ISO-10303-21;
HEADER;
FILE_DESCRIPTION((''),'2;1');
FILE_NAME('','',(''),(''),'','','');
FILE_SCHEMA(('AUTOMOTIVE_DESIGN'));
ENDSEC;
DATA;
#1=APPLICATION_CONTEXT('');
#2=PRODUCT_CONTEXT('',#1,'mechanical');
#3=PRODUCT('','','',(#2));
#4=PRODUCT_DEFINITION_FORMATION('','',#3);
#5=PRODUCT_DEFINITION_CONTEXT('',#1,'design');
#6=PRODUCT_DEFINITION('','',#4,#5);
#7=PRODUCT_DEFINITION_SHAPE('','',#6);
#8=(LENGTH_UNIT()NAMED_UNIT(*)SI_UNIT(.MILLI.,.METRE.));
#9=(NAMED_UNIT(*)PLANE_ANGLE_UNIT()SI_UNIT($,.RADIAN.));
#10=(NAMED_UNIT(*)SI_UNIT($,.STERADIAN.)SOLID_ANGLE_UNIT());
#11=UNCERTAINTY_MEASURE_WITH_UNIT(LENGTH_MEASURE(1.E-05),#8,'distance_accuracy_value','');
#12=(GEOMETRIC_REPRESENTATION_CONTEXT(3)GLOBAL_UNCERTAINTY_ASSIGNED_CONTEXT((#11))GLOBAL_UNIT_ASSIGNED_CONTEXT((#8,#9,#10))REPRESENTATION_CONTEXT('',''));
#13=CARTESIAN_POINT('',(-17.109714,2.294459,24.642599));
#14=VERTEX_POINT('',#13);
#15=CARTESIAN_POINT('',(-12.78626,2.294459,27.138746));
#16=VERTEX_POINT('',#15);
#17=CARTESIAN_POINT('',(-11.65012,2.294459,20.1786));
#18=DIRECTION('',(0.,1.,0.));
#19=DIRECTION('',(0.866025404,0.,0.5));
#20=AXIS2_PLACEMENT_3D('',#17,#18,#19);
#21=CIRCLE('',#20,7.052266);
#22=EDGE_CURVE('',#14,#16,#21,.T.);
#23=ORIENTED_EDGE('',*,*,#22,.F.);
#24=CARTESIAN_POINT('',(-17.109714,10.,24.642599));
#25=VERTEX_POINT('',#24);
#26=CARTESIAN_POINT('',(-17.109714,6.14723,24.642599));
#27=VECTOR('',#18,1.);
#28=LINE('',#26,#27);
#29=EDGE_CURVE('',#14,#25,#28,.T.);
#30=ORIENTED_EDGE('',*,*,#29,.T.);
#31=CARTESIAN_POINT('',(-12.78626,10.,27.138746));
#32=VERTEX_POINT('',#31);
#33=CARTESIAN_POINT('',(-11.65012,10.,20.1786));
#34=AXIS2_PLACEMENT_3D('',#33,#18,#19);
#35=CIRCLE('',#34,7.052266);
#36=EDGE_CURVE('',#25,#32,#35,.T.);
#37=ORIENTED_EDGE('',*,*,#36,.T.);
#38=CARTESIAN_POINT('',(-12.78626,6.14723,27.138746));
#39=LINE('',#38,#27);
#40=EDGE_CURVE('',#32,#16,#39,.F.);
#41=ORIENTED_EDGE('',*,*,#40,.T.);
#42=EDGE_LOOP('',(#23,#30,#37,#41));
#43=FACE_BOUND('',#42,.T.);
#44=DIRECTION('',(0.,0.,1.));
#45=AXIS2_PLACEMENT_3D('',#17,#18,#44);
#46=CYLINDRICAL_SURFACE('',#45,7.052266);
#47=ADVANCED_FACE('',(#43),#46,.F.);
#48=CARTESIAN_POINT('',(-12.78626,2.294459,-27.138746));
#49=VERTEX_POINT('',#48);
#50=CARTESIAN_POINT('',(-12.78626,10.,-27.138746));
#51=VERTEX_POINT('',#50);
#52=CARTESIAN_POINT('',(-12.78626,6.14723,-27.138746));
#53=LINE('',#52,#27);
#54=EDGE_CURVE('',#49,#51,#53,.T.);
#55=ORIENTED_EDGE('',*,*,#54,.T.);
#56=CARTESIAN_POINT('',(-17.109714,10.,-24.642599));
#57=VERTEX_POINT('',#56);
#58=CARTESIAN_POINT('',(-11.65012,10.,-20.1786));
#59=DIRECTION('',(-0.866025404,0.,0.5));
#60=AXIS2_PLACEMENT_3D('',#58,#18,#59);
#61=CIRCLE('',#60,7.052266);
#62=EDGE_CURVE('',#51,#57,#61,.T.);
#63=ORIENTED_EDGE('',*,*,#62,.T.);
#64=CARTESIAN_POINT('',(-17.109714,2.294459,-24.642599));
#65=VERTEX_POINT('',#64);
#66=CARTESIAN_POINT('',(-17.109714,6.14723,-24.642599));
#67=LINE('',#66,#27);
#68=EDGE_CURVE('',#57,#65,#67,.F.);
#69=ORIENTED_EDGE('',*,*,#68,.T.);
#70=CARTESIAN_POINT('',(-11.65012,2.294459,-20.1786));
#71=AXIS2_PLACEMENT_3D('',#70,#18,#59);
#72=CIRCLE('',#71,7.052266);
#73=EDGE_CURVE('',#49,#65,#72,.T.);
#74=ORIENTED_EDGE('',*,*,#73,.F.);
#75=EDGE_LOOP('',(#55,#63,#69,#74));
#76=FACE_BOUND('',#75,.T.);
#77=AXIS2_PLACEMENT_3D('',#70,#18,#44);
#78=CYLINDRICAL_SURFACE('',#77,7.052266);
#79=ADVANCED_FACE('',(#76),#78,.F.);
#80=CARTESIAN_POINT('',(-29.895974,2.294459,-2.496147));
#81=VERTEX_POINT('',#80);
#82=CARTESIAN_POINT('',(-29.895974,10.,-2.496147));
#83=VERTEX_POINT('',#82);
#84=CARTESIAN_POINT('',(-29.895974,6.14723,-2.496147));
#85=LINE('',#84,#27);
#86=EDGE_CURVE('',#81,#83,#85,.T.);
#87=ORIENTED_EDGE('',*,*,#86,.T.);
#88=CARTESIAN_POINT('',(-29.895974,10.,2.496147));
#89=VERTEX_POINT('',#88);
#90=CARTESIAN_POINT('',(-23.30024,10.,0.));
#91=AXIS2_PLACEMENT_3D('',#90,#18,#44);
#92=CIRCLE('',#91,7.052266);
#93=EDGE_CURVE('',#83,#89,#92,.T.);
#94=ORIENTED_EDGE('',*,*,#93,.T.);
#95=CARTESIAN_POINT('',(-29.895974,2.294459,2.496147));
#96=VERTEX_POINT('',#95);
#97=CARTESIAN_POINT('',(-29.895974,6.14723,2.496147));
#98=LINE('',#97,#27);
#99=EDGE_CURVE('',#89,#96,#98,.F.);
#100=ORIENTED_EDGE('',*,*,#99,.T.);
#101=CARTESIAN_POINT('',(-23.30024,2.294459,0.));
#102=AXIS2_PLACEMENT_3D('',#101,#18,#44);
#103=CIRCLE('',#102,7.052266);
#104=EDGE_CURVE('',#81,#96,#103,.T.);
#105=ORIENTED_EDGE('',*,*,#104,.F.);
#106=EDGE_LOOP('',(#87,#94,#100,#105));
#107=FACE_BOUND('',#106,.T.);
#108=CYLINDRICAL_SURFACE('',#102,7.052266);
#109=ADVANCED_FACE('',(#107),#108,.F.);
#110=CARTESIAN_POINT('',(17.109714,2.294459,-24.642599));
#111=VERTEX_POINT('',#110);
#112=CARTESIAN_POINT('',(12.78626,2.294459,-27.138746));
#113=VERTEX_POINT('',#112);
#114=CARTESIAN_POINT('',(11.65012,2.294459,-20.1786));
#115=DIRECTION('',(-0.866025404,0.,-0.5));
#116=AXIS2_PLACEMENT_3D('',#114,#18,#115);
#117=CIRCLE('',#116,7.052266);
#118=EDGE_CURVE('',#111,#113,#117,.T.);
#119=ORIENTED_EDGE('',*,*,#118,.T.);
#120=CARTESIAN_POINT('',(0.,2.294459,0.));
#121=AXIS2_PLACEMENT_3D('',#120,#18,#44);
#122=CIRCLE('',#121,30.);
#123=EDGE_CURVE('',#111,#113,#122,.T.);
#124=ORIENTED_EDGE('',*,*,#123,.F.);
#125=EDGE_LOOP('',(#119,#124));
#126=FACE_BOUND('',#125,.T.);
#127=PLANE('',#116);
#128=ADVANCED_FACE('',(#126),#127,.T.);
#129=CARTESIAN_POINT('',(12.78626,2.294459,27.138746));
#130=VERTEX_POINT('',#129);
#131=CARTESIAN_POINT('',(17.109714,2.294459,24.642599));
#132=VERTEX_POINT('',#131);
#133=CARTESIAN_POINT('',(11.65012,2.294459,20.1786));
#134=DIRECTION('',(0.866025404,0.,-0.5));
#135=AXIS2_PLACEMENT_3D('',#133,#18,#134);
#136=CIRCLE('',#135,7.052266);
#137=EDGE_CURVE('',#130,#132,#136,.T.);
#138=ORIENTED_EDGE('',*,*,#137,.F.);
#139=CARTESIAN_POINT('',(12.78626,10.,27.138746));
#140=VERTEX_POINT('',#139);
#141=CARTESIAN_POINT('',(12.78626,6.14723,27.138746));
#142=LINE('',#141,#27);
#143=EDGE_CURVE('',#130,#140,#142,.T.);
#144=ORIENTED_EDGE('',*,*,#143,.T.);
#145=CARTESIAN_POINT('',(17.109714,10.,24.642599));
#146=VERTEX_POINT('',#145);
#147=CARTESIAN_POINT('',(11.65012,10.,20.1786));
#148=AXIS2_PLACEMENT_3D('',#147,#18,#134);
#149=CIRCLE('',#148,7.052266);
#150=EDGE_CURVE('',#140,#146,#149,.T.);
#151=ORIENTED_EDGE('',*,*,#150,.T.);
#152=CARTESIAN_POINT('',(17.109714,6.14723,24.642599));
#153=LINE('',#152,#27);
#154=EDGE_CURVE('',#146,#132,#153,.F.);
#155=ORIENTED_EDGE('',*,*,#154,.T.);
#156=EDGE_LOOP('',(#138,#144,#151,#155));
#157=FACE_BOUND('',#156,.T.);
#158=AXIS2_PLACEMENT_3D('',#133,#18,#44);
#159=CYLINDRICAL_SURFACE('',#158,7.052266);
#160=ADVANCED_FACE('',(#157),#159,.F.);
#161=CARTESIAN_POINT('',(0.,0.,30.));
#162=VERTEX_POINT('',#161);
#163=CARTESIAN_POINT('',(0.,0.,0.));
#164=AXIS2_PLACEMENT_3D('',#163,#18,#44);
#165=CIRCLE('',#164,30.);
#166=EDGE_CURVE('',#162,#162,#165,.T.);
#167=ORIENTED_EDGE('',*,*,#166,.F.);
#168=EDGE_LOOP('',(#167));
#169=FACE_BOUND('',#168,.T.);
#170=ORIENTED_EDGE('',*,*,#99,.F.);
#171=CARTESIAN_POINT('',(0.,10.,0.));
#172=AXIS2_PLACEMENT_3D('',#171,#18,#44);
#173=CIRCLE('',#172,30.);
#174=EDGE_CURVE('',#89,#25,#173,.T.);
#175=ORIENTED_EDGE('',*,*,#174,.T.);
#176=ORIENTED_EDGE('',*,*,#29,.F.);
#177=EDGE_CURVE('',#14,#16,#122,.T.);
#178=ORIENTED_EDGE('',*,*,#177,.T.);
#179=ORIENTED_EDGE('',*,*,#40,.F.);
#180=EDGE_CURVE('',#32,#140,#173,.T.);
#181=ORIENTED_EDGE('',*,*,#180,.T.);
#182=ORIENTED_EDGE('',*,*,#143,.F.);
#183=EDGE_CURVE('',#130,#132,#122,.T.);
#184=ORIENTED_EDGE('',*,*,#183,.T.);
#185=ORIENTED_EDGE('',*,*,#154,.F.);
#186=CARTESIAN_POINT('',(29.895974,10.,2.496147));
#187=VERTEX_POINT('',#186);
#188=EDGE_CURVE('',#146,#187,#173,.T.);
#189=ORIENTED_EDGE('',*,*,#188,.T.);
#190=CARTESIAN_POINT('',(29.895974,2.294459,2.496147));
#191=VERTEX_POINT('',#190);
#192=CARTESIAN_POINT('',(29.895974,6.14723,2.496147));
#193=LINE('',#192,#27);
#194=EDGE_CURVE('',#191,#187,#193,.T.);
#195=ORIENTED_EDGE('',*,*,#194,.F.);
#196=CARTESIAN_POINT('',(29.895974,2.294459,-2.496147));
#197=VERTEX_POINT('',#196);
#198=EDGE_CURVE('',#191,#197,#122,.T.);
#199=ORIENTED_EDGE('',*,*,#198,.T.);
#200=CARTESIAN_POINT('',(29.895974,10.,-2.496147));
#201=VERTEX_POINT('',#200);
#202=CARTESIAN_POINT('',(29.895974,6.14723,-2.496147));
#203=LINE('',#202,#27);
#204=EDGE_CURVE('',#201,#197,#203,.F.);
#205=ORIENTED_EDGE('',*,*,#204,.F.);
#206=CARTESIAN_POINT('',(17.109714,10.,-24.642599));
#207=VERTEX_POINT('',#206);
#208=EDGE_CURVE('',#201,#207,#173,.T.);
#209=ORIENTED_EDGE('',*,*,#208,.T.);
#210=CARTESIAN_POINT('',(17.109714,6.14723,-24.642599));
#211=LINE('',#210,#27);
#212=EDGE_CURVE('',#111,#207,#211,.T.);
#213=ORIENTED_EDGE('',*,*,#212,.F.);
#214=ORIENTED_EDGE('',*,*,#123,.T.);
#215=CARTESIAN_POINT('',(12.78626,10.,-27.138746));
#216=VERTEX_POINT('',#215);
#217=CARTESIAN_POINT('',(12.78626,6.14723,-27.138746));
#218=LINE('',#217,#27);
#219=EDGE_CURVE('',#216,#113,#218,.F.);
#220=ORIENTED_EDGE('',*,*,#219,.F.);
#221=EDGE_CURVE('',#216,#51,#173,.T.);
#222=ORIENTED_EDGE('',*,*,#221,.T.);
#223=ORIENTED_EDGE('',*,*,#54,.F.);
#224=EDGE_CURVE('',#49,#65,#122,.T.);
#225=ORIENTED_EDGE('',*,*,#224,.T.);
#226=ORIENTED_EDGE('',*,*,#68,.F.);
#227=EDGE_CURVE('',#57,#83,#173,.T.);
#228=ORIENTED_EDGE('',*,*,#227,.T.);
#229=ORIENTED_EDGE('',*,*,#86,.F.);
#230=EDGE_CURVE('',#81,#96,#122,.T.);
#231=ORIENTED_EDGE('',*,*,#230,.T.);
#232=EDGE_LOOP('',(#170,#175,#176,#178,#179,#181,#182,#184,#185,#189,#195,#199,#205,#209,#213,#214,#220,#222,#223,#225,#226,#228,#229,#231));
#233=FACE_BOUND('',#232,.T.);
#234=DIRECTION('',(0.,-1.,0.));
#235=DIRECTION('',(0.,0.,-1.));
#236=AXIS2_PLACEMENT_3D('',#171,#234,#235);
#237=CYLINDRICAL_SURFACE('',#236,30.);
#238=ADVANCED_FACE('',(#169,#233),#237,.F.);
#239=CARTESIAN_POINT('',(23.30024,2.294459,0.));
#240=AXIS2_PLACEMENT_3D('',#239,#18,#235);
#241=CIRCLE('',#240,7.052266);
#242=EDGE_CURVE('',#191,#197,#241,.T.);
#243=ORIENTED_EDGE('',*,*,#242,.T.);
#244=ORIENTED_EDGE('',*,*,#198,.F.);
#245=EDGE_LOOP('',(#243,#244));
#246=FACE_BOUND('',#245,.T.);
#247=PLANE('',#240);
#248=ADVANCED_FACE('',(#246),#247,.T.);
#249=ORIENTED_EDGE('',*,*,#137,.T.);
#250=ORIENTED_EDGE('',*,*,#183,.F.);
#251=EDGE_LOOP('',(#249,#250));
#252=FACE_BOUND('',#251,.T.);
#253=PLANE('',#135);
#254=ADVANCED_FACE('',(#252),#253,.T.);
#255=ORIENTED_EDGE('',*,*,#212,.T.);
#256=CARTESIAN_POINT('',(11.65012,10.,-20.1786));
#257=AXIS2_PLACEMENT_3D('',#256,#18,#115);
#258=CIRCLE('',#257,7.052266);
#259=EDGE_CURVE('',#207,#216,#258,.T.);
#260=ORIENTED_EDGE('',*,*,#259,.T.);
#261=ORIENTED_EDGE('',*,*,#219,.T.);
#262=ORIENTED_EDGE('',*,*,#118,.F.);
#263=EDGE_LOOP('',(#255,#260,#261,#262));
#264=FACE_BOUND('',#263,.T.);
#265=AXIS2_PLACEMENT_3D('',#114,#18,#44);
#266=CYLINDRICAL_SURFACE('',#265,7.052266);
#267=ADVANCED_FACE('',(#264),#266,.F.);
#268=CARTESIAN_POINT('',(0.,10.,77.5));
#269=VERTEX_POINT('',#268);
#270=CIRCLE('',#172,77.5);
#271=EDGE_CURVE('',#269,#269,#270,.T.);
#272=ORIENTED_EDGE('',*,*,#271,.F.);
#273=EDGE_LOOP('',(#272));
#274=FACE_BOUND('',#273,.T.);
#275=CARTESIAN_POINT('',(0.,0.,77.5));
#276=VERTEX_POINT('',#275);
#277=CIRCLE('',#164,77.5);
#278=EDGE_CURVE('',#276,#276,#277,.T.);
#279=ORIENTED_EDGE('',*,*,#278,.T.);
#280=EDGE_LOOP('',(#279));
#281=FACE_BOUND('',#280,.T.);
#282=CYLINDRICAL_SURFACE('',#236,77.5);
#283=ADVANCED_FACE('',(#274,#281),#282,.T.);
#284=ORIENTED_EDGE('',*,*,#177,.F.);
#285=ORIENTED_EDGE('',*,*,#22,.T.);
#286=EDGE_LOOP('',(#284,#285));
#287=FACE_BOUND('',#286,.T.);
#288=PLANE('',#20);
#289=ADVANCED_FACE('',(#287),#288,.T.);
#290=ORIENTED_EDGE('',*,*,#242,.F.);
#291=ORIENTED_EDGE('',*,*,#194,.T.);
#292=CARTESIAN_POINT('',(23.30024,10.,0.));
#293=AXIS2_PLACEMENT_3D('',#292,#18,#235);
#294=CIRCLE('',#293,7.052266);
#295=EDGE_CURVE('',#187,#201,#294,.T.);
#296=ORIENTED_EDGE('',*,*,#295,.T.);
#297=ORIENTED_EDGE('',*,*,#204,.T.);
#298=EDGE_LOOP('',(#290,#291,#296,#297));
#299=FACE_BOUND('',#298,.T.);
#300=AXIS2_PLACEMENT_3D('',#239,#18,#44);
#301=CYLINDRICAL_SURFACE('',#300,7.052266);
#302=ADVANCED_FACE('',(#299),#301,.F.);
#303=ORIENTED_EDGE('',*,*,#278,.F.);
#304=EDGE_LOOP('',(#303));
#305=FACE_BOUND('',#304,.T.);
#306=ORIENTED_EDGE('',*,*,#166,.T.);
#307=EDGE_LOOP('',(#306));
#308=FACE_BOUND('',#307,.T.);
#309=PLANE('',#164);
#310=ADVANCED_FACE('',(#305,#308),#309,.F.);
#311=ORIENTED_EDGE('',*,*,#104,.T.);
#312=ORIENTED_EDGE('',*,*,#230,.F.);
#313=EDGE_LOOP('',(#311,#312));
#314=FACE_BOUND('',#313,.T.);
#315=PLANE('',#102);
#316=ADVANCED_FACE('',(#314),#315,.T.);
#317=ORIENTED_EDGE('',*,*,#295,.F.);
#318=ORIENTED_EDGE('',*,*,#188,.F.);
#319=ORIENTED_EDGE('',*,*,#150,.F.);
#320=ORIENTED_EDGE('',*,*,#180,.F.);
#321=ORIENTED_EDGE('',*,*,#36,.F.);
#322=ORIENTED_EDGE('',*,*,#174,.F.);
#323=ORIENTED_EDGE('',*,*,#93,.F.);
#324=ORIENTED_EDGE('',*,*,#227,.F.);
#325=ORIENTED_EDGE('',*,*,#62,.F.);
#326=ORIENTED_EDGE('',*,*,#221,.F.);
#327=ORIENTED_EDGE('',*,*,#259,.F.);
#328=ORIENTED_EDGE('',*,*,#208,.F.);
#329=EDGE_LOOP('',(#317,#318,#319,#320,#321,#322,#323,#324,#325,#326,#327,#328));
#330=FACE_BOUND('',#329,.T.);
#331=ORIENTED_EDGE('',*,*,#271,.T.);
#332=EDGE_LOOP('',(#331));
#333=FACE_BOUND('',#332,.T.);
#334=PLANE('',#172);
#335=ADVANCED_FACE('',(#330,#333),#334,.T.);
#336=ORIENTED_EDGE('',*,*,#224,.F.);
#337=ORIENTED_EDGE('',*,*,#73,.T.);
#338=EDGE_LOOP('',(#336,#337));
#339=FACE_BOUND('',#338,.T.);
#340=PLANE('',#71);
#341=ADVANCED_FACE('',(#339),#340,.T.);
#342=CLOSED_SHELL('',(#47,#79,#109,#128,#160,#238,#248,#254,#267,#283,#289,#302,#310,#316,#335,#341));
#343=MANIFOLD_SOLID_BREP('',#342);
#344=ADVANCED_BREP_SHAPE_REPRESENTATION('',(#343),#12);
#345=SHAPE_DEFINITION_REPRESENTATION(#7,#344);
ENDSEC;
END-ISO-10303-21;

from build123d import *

# Parameters (mm, degrees)
SKETCH1_R           = 77.5
BOSS_EXTRUDE1_DEPTH = 10
SKETCH2_R           = 30
CUT_EXTRUDE1_DEPTH  = 111.056803515
SKETCH3_R           = 7.052265752
CUT_EXTRUDE2_DEPTH  = 7.705540898
CIRPATTERN1_COUNT   = 6


with BuildPart() as part:
    # Sketch1 → Boss-Extrude1 (new body)
    with BuildSketch(Plane(origin=(0, 0, 0), x_dir=(1, 0, 0), z_dir=(0, 1, 0))):
        Circle(SKETCH1_R)
    extrude(amount=BOSS_EXTRUDE1_DEPTH)

    # Sketch2 → Cut-Extrude1 (cut, through all)
    with BuildSketch(Plane(origin=(0, 0, 0), x_dir=(1, 0, 0), z_dir=(0, 1, 0))):
        Circle(SKETCH2_R)
    extrude(amount=CUT_EXTRUDE1_DEPTH, mode=Mode.SUBTRACT)

    # Sketch3 → Cut-Extrude2 (cut)
    with BuildSketch(Plane(origin=(0, 10, 0), x_dir=(1, 0, 0), z_dir=(0, 1, 0))):
        with Locations((-23.300240119, 0)):
            Circle(SKETCH3_R)
    cut_extrude2 = extrude(amount=-CUT_EXTRUDE2_DEPTH, mode=Mode.SUBTRACT)

    # CirPattern1: Cut-Extrude2 ×6 about axis
    cirpattern1_axis = Axis((0, 0, 0), (0, 1, 0))
    for i in range(1, CIRPATTERN1_COUNT):
        add(cut_extrude2.rotate(cirpattern1_axis, i * 360 / CIRPATTERN1_COUNT), mode=Mode.SUBTRACT)


solid = part.part
